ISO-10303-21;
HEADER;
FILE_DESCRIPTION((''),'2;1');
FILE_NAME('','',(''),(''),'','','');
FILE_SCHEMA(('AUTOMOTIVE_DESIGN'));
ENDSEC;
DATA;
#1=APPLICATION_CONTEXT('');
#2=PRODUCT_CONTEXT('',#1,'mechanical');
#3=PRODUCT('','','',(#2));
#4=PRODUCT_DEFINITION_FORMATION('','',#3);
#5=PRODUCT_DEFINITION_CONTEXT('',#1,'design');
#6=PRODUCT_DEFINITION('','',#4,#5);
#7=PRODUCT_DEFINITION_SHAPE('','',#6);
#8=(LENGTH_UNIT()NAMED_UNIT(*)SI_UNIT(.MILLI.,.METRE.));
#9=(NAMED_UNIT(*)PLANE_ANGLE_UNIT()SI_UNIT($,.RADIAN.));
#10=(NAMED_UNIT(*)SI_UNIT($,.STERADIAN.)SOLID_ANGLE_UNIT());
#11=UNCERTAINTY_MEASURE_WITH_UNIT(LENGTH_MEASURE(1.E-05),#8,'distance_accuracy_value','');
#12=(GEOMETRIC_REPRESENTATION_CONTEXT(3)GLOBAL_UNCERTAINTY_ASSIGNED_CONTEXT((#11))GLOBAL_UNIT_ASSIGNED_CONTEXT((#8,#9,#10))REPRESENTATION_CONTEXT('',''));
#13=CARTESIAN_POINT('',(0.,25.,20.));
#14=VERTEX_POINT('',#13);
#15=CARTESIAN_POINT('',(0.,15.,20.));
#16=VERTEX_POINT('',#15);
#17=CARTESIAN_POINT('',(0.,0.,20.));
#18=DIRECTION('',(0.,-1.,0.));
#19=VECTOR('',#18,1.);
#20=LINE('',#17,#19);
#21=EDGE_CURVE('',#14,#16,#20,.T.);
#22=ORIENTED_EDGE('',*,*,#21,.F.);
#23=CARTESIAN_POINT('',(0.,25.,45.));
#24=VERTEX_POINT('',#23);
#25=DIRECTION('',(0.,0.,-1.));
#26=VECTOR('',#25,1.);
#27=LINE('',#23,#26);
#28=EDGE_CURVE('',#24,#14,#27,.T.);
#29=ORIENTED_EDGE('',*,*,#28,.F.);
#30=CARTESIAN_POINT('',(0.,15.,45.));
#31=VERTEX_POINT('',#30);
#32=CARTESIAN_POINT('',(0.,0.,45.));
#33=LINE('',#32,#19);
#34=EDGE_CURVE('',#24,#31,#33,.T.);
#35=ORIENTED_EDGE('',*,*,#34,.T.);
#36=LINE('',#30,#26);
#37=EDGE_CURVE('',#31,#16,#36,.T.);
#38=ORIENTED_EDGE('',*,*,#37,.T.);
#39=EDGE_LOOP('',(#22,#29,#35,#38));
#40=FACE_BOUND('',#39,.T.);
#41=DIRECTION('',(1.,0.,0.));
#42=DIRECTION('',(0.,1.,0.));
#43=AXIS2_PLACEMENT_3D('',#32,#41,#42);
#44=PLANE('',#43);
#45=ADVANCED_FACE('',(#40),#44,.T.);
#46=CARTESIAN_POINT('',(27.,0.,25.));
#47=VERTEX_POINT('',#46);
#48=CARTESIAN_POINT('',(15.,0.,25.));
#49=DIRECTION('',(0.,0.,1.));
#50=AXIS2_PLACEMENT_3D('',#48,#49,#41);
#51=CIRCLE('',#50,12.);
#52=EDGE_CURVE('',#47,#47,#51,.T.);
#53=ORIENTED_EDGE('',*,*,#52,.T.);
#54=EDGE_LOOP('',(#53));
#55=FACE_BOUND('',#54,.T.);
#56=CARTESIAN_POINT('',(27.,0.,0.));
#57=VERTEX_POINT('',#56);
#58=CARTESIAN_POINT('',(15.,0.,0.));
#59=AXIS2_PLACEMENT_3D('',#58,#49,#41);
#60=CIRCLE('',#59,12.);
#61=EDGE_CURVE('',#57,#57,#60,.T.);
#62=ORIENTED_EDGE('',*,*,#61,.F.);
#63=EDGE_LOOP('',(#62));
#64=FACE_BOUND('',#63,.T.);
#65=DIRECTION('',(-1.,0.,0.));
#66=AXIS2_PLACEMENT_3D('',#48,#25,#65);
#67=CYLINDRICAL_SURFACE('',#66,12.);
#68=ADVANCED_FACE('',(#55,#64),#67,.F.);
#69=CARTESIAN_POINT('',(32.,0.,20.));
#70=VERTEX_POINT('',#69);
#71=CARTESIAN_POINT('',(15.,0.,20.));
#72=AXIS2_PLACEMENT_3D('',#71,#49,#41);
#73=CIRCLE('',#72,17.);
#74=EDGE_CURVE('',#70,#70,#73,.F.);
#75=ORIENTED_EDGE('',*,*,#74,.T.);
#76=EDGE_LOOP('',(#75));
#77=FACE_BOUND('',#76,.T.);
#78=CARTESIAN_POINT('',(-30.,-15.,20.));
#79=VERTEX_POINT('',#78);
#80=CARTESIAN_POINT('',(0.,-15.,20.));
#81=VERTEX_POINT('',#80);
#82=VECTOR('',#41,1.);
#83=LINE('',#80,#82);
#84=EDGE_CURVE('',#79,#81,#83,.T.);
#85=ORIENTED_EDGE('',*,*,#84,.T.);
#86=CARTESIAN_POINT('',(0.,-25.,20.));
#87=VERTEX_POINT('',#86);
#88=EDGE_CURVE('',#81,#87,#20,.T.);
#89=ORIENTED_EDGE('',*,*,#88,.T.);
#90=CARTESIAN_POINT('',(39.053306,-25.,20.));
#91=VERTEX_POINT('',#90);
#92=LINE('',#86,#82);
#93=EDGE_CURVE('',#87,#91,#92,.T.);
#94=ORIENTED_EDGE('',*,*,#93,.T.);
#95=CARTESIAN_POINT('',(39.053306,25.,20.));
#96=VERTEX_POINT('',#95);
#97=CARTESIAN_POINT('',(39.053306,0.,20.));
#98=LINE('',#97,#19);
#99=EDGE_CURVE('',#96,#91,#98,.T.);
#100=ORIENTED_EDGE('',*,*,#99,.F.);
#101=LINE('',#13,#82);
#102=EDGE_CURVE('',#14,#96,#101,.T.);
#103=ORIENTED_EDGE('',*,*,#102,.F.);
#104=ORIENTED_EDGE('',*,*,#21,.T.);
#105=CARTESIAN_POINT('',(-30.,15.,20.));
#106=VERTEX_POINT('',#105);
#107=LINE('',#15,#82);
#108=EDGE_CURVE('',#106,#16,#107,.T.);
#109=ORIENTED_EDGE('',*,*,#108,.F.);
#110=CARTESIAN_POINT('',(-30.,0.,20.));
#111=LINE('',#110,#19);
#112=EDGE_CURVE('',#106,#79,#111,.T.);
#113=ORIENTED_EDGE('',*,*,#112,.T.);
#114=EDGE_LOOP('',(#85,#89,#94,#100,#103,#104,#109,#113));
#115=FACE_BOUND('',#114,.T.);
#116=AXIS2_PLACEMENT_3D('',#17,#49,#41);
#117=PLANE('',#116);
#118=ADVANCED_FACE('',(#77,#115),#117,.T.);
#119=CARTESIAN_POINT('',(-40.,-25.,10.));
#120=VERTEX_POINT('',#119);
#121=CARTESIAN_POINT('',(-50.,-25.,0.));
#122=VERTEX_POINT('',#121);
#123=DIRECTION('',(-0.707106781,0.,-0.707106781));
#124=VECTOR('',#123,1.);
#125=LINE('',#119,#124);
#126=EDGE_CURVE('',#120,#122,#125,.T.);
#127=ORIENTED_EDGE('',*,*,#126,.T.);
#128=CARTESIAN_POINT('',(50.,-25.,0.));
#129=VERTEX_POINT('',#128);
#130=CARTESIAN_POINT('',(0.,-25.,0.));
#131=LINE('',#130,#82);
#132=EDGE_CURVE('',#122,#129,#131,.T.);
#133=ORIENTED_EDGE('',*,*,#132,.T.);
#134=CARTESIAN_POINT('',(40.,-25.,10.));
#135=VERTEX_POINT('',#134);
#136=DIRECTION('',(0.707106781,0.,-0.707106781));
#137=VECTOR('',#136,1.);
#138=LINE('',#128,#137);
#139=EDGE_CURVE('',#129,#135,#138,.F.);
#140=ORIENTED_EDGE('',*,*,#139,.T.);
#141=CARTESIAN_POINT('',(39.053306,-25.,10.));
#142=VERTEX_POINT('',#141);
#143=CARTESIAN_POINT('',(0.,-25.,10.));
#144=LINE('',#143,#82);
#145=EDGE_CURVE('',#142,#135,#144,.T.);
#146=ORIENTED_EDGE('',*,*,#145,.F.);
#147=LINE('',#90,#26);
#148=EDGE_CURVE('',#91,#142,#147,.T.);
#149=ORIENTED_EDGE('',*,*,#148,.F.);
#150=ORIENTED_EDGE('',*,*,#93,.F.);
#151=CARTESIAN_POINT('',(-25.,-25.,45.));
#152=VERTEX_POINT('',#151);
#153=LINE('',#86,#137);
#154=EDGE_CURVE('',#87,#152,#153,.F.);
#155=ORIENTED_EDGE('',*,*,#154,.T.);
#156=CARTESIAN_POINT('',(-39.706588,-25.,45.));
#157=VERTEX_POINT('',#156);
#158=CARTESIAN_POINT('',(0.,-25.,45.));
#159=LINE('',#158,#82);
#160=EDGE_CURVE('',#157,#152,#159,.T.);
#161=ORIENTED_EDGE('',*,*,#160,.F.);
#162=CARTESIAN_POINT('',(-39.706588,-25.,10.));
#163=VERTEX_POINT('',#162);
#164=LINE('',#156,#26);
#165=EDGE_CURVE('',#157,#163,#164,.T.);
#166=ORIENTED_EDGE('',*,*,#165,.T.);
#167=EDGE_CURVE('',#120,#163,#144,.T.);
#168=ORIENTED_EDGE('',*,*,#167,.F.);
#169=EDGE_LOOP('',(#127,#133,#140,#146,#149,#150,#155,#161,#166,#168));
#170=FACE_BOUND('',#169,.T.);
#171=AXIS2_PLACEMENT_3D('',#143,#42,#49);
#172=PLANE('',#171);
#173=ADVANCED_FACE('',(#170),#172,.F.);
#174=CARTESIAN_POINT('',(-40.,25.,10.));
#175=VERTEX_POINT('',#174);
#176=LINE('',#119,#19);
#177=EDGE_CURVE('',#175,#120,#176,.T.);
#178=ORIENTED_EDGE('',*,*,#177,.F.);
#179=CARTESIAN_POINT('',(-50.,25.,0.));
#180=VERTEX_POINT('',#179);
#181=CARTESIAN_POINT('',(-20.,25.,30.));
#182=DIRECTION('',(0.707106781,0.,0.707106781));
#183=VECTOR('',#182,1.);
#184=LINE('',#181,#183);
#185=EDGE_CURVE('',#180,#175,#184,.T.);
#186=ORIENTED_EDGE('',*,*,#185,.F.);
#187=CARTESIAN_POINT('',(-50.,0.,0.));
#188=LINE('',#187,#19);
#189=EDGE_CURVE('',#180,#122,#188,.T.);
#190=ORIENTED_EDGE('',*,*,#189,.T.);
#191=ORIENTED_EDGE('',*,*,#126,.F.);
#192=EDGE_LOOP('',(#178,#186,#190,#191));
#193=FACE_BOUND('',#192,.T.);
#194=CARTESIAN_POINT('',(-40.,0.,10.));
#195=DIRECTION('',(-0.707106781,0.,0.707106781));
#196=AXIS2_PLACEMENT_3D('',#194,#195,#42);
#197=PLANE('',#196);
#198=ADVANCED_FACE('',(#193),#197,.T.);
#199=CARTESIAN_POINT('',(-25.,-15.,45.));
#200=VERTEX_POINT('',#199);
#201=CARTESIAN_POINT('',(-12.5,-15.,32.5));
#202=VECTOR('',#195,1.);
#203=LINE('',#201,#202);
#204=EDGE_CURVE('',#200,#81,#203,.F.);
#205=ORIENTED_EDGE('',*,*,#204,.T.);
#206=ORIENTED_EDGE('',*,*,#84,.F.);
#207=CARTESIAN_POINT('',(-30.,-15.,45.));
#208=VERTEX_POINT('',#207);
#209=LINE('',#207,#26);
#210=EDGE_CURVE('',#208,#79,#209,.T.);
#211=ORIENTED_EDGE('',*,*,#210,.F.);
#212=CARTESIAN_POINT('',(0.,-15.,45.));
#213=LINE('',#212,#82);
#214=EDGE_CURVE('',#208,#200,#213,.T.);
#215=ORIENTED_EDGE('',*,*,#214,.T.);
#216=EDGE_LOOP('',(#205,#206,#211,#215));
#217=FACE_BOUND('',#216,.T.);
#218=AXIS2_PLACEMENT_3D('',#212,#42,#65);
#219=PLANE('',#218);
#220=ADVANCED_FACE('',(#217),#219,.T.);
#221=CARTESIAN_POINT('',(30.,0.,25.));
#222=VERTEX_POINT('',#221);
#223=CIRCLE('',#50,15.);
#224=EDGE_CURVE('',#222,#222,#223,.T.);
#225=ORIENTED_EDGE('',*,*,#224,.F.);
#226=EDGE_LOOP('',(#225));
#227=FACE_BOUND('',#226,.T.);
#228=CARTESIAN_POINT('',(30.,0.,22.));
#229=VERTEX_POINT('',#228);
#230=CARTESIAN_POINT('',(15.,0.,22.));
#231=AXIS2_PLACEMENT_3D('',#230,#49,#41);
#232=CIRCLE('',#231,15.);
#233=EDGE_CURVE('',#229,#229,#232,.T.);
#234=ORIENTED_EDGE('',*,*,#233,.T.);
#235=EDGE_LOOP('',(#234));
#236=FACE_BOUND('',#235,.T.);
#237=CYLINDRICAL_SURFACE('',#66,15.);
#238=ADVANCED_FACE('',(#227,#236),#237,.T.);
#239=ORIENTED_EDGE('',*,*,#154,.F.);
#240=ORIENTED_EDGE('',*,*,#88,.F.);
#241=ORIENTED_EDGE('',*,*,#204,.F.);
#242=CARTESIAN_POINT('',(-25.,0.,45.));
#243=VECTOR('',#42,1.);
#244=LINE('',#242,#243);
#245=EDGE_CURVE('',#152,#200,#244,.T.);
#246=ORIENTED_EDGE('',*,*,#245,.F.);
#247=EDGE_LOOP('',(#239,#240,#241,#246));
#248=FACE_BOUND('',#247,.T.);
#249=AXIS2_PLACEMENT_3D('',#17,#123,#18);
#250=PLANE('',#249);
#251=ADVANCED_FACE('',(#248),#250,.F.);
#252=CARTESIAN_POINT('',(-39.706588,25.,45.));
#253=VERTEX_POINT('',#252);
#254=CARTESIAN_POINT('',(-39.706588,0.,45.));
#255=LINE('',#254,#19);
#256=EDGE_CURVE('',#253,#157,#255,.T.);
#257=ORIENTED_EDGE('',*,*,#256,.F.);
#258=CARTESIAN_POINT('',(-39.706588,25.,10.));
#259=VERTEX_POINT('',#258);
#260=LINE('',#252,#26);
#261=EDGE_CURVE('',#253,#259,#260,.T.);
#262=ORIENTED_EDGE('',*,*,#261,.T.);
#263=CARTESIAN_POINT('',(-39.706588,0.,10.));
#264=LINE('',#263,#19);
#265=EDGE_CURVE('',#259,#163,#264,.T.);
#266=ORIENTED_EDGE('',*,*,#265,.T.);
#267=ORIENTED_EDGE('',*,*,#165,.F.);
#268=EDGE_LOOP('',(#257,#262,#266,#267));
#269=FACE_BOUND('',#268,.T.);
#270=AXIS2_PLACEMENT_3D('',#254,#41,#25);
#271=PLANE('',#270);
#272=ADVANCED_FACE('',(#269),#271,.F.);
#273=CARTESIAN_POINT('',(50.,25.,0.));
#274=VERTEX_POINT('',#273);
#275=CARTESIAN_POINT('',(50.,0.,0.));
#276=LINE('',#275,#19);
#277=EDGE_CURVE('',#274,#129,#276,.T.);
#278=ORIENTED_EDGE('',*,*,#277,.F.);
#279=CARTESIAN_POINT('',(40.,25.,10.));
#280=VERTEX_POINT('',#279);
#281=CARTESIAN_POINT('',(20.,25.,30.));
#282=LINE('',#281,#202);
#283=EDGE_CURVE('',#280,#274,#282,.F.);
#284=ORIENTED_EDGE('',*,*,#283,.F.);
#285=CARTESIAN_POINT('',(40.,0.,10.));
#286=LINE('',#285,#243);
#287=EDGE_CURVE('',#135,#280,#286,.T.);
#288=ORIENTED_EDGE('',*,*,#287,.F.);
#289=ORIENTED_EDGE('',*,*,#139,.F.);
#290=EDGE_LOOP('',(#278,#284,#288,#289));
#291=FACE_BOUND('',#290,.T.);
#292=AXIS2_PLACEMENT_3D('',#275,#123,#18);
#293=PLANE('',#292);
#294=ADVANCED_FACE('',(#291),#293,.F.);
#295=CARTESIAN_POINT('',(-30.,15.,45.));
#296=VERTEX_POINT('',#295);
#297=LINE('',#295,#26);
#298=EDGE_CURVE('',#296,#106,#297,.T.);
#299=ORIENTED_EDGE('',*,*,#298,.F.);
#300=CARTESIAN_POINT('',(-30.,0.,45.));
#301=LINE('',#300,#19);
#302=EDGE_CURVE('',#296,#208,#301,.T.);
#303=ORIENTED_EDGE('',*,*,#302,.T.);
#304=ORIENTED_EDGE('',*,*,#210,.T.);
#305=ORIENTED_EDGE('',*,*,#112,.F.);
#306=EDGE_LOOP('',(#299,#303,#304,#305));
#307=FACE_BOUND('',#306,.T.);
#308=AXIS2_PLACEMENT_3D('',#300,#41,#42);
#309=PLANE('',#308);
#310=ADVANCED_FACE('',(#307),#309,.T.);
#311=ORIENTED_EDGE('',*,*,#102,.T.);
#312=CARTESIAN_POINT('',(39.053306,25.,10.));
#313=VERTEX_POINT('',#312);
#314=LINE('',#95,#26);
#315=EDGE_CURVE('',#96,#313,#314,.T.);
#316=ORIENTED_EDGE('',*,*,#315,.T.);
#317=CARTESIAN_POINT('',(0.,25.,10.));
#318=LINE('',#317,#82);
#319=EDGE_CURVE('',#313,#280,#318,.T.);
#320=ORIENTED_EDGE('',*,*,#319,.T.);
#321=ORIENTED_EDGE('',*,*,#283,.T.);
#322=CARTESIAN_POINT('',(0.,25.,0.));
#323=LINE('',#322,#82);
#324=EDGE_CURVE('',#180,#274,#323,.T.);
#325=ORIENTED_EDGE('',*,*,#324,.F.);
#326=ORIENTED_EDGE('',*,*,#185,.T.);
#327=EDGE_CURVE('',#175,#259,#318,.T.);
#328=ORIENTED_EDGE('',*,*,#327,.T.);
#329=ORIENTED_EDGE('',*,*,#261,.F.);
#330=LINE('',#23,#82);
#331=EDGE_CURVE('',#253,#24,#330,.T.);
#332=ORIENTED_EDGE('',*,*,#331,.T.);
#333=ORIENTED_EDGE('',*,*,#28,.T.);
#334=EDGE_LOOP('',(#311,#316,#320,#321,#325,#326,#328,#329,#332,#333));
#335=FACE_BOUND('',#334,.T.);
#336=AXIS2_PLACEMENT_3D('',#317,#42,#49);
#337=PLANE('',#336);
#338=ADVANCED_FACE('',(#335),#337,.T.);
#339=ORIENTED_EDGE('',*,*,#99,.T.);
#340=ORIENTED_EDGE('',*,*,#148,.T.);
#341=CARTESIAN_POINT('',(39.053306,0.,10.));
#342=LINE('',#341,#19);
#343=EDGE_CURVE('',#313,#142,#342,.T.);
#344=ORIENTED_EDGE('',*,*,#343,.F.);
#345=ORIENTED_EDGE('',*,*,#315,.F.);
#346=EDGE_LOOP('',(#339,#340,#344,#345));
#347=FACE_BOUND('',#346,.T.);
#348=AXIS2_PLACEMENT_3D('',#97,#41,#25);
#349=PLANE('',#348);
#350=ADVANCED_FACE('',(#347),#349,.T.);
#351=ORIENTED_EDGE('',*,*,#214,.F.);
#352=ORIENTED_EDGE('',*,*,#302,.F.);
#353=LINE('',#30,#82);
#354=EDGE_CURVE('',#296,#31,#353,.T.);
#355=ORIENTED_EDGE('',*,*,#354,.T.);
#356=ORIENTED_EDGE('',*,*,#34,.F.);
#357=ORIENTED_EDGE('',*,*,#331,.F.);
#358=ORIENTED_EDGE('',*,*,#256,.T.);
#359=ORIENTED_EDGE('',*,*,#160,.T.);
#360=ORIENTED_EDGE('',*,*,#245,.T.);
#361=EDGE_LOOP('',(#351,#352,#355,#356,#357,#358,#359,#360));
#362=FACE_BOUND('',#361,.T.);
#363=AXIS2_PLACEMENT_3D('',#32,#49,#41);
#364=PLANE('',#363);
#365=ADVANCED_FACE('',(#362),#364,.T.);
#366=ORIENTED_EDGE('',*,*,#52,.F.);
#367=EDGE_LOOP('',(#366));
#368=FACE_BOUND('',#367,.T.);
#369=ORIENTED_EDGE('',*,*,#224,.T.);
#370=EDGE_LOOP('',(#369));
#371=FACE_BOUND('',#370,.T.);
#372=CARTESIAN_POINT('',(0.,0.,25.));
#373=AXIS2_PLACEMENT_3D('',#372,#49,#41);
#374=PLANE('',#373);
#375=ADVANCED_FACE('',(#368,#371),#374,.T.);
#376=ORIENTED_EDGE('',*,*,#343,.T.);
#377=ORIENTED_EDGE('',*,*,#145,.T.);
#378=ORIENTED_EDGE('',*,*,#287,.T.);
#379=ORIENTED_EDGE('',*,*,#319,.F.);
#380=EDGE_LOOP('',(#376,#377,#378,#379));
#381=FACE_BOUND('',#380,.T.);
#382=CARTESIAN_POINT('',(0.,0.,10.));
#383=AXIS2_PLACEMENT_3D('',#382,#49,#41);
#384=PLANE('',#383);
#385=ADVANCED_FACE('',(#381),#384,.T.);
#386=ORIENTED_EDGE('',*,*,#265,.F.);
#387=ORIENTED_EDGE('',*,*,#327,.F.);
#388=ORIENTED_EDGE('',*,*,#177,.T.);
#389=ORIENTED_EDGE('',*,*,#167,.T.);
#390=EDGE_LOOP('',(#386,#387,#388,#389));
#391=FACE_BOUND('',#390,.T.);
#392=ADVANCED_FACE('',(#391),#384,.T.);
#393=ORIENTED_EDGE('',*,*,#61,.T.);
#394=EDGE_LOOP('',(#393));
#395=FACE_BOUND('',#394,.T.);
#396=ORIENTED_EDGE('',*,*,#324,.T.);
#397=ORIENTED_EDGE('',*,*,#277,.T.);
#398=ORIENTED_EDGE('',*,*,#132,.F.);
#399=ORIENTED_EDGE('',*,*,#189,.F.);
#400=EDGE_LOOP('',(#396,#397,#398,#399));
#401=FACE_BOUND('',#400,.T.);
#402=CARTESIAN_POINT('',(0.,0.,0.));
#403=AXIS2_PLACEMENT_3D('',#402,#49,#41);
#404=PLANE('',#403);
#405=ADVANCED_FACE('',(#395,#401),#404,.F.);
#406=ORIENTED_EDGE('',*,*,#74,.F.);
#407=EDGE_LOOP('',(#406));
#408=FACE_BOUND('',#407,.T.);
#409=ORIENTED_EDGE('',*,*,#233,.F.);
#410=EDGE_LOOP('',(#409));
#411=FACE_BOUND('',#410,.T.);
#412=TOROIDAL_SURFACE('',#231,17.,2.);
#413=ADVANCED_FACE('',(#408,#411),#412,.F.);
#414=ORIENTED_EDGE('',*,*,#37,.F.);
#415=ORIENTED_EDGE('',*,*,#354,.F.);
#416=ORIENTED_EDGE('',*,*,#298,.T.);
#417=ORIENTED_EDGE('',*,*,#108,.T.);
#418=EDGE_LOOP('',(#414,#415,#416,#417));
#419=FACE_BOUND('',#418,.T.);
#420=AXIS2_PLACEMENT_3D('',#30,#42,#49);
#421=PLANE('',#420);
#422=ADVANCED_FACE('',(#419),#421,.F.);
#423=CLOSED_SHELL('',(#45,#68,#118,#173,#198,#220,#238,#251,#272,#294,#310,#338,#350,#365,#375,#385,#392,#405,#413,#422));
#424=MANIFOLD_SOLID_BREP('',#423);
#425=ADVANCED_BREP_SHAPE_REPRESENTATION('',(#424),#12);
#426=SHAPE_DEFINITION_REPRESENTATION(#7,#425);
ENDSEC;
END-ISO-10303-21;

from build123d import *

# Parameters (mm, degrees)
ESQUISSE1_W        = 10.293411782
ESQUISSE1_H        = 50
BOSS_EXTRU_1_DEPTH = 10
ESQUISSE1_5_W      = 30
ESQUISSE1_5_H      = 10
BOSS_EXTRU_2_DEPTH = 45
ESQUISSE1_6_W      = 10.946693759
ESQUISSE1_6_H      = 50
ESQUISSE1_6_W_2    = 10.293411782
BOSS_EXTRU_3_DEPTH = 10
ESQUISSE1_7_R      = 15
ESQUISSE1_7_R_2    = 12
BOSS_EXTRU_4_DEPTH = 25
ESQUISSE1_8_R      = 15
BOSS_EXTRU_5_DEPTH = 20
CONG_3_R           = 2
CHANFREIN2_SIZE    = 25
CHANFREIN21_SIZE   = 10
CHANFREIN22_SIZE   = 10


with BuildPart() as part:
    # Esquisse1 → Boss.-Extru.1 (new body)
    with BuildSketch(Plane.XY):
        with Locations((-44.853294109, 0)):
            Rectangle(ESQUISSE1_W, ESQUISSE1_H)
    extrude(amount=BOSS_EXTRU_1_DEPTH)

    # Esquisse1<5> → Boss.-Extru.2 (add)
    with BuildSketch(Plane.XY):
        Polygon((-30, 25), (-39.706588218, 25), (-39.706588218, -25), (-30, -25), (-30, -15), (-30, 15), align=None)
        with Locations((-15, -20)):
            Rectangle(ESQUISSE1_5_W, ESQUISSE1_5_H)
        with Locations((-15, 20)):
            Rectangle(ESQUISSE1_5_W, ESQUISSE1_5_H)
    extrude(amount=BOSS_EXTRU_2_DEPTH)

    # Esquisse1<6> → Boss.-Extru.3 (add)
    with BuildSketch(Plane.XY):
        with Locations((44.526653121, 0)):
            Rectangle(ESQUISSE1_6_W, ESQUISSE1_6_H)
        with Locations((-44.853294109, 0)):
            Rectangle(ESQUISSE1_6_W_2, ESQUISSE1_6_H)
    extrude(amount=BOSS_EXTRU_3_DEPTH)


with BuildPart() as boss_extru_3_piece_1:
    # of the separate pieces the step leaves, piece 1, a body of its own (boss_extru_3_pieces)
    add(part.part.solids().sort_by_distance((-50, 25, 0))[0])



with BuildPart() as boss_extru_3_piece_2:
    # of the separate pieces the step leaves, piece 2, a body of its own (boss_extru_3_pieces)
    add(part.part.solids().sort_by_distance((39.053306241, -25, 0))[0])


with BuildPart() as body_3:
    # Esquisse1<7> → Boss.-Extru.4 (new body)
    with BuildSketch(Plane.XY):
        with Locations((15, 0)):
            Circle(ESQUISSE1_7_R)
        with Locations((15, 0)):
            Circle(ESQUISSE1_7_R_2, mode=Mode.SUBTRACT)
    extrude(amount=BOSS_EXTRU_4_DEPTH)


with BuildPart() as boss_extru_3_piece_1_1:
    add(boss_extru_3_piece_1.part)

    add(boss_extru_3_piece_2.part)  # Boss.-Extru.5 merges Boss.-Extru.3 piece 2

    add(body_3.part)  # Boss.-Extru.5 merges body 3
    # Esquisse1<8> → Boss.-Extru.5 (add)
    with BuildSketch(Plane.XY):
        Polygon((39.053306241, 25), (0, 25), (0, 15), (-30, 15), (-30, -15), (0, -15), (0, -25), (39.053306241, -25), align=None)
        with Locations((15, 0)):
            Circle(ESQUISSE1_8_R, mode=Mode.SUBTRACT)
    extrude(amount=BOSS_EXTRU_5_DEPTH)

    # Congé3
    cong_3_edges = [boss_extru_3_piece_1_1.edges().sort_by_distance(p)[0] for p in [
        (0, 0, 20),
    ]]
    fillet(cong_3_edges, radius=CONG_3_R)

    # Chanfrein2
    chanfrein2_edges = [boss_extru_3_piece_1_1.edges().sort_by_distance(p)[0] for p in [
        (0, -20, 45),
    ]]
    chamfer(chanfrein2_edges, length=CHANFREIN2_SIZE - 0.0001)  # a hair under: the kernel refuses the full size

    # Chanfrein21
    chanfrein21_edges = [boss_extru_3_piece_1_1.edges().sort_by_distance(p)[0] for p in [
        (50, 0, 10),
    ]]
    chamfer(chanfrein21_edges, length=CHANFREIN21_SIZE - 0.0001)  # a hair under: the kernel refuses the full size

    # Chanfrein22
    chanfrein22_edges = [boss_extru_3_piece_1_1.edges().sort_by_distance(p)[0] for p in [
        (-50, 0, 10),
    ]]
    chamfer(chanfrein22_edges, length=CHANFREIN22_SIZE - 0.0001)  # a hair under: the kernel refuses the full size


solid = boss_extru_3_piece_1_1.part
